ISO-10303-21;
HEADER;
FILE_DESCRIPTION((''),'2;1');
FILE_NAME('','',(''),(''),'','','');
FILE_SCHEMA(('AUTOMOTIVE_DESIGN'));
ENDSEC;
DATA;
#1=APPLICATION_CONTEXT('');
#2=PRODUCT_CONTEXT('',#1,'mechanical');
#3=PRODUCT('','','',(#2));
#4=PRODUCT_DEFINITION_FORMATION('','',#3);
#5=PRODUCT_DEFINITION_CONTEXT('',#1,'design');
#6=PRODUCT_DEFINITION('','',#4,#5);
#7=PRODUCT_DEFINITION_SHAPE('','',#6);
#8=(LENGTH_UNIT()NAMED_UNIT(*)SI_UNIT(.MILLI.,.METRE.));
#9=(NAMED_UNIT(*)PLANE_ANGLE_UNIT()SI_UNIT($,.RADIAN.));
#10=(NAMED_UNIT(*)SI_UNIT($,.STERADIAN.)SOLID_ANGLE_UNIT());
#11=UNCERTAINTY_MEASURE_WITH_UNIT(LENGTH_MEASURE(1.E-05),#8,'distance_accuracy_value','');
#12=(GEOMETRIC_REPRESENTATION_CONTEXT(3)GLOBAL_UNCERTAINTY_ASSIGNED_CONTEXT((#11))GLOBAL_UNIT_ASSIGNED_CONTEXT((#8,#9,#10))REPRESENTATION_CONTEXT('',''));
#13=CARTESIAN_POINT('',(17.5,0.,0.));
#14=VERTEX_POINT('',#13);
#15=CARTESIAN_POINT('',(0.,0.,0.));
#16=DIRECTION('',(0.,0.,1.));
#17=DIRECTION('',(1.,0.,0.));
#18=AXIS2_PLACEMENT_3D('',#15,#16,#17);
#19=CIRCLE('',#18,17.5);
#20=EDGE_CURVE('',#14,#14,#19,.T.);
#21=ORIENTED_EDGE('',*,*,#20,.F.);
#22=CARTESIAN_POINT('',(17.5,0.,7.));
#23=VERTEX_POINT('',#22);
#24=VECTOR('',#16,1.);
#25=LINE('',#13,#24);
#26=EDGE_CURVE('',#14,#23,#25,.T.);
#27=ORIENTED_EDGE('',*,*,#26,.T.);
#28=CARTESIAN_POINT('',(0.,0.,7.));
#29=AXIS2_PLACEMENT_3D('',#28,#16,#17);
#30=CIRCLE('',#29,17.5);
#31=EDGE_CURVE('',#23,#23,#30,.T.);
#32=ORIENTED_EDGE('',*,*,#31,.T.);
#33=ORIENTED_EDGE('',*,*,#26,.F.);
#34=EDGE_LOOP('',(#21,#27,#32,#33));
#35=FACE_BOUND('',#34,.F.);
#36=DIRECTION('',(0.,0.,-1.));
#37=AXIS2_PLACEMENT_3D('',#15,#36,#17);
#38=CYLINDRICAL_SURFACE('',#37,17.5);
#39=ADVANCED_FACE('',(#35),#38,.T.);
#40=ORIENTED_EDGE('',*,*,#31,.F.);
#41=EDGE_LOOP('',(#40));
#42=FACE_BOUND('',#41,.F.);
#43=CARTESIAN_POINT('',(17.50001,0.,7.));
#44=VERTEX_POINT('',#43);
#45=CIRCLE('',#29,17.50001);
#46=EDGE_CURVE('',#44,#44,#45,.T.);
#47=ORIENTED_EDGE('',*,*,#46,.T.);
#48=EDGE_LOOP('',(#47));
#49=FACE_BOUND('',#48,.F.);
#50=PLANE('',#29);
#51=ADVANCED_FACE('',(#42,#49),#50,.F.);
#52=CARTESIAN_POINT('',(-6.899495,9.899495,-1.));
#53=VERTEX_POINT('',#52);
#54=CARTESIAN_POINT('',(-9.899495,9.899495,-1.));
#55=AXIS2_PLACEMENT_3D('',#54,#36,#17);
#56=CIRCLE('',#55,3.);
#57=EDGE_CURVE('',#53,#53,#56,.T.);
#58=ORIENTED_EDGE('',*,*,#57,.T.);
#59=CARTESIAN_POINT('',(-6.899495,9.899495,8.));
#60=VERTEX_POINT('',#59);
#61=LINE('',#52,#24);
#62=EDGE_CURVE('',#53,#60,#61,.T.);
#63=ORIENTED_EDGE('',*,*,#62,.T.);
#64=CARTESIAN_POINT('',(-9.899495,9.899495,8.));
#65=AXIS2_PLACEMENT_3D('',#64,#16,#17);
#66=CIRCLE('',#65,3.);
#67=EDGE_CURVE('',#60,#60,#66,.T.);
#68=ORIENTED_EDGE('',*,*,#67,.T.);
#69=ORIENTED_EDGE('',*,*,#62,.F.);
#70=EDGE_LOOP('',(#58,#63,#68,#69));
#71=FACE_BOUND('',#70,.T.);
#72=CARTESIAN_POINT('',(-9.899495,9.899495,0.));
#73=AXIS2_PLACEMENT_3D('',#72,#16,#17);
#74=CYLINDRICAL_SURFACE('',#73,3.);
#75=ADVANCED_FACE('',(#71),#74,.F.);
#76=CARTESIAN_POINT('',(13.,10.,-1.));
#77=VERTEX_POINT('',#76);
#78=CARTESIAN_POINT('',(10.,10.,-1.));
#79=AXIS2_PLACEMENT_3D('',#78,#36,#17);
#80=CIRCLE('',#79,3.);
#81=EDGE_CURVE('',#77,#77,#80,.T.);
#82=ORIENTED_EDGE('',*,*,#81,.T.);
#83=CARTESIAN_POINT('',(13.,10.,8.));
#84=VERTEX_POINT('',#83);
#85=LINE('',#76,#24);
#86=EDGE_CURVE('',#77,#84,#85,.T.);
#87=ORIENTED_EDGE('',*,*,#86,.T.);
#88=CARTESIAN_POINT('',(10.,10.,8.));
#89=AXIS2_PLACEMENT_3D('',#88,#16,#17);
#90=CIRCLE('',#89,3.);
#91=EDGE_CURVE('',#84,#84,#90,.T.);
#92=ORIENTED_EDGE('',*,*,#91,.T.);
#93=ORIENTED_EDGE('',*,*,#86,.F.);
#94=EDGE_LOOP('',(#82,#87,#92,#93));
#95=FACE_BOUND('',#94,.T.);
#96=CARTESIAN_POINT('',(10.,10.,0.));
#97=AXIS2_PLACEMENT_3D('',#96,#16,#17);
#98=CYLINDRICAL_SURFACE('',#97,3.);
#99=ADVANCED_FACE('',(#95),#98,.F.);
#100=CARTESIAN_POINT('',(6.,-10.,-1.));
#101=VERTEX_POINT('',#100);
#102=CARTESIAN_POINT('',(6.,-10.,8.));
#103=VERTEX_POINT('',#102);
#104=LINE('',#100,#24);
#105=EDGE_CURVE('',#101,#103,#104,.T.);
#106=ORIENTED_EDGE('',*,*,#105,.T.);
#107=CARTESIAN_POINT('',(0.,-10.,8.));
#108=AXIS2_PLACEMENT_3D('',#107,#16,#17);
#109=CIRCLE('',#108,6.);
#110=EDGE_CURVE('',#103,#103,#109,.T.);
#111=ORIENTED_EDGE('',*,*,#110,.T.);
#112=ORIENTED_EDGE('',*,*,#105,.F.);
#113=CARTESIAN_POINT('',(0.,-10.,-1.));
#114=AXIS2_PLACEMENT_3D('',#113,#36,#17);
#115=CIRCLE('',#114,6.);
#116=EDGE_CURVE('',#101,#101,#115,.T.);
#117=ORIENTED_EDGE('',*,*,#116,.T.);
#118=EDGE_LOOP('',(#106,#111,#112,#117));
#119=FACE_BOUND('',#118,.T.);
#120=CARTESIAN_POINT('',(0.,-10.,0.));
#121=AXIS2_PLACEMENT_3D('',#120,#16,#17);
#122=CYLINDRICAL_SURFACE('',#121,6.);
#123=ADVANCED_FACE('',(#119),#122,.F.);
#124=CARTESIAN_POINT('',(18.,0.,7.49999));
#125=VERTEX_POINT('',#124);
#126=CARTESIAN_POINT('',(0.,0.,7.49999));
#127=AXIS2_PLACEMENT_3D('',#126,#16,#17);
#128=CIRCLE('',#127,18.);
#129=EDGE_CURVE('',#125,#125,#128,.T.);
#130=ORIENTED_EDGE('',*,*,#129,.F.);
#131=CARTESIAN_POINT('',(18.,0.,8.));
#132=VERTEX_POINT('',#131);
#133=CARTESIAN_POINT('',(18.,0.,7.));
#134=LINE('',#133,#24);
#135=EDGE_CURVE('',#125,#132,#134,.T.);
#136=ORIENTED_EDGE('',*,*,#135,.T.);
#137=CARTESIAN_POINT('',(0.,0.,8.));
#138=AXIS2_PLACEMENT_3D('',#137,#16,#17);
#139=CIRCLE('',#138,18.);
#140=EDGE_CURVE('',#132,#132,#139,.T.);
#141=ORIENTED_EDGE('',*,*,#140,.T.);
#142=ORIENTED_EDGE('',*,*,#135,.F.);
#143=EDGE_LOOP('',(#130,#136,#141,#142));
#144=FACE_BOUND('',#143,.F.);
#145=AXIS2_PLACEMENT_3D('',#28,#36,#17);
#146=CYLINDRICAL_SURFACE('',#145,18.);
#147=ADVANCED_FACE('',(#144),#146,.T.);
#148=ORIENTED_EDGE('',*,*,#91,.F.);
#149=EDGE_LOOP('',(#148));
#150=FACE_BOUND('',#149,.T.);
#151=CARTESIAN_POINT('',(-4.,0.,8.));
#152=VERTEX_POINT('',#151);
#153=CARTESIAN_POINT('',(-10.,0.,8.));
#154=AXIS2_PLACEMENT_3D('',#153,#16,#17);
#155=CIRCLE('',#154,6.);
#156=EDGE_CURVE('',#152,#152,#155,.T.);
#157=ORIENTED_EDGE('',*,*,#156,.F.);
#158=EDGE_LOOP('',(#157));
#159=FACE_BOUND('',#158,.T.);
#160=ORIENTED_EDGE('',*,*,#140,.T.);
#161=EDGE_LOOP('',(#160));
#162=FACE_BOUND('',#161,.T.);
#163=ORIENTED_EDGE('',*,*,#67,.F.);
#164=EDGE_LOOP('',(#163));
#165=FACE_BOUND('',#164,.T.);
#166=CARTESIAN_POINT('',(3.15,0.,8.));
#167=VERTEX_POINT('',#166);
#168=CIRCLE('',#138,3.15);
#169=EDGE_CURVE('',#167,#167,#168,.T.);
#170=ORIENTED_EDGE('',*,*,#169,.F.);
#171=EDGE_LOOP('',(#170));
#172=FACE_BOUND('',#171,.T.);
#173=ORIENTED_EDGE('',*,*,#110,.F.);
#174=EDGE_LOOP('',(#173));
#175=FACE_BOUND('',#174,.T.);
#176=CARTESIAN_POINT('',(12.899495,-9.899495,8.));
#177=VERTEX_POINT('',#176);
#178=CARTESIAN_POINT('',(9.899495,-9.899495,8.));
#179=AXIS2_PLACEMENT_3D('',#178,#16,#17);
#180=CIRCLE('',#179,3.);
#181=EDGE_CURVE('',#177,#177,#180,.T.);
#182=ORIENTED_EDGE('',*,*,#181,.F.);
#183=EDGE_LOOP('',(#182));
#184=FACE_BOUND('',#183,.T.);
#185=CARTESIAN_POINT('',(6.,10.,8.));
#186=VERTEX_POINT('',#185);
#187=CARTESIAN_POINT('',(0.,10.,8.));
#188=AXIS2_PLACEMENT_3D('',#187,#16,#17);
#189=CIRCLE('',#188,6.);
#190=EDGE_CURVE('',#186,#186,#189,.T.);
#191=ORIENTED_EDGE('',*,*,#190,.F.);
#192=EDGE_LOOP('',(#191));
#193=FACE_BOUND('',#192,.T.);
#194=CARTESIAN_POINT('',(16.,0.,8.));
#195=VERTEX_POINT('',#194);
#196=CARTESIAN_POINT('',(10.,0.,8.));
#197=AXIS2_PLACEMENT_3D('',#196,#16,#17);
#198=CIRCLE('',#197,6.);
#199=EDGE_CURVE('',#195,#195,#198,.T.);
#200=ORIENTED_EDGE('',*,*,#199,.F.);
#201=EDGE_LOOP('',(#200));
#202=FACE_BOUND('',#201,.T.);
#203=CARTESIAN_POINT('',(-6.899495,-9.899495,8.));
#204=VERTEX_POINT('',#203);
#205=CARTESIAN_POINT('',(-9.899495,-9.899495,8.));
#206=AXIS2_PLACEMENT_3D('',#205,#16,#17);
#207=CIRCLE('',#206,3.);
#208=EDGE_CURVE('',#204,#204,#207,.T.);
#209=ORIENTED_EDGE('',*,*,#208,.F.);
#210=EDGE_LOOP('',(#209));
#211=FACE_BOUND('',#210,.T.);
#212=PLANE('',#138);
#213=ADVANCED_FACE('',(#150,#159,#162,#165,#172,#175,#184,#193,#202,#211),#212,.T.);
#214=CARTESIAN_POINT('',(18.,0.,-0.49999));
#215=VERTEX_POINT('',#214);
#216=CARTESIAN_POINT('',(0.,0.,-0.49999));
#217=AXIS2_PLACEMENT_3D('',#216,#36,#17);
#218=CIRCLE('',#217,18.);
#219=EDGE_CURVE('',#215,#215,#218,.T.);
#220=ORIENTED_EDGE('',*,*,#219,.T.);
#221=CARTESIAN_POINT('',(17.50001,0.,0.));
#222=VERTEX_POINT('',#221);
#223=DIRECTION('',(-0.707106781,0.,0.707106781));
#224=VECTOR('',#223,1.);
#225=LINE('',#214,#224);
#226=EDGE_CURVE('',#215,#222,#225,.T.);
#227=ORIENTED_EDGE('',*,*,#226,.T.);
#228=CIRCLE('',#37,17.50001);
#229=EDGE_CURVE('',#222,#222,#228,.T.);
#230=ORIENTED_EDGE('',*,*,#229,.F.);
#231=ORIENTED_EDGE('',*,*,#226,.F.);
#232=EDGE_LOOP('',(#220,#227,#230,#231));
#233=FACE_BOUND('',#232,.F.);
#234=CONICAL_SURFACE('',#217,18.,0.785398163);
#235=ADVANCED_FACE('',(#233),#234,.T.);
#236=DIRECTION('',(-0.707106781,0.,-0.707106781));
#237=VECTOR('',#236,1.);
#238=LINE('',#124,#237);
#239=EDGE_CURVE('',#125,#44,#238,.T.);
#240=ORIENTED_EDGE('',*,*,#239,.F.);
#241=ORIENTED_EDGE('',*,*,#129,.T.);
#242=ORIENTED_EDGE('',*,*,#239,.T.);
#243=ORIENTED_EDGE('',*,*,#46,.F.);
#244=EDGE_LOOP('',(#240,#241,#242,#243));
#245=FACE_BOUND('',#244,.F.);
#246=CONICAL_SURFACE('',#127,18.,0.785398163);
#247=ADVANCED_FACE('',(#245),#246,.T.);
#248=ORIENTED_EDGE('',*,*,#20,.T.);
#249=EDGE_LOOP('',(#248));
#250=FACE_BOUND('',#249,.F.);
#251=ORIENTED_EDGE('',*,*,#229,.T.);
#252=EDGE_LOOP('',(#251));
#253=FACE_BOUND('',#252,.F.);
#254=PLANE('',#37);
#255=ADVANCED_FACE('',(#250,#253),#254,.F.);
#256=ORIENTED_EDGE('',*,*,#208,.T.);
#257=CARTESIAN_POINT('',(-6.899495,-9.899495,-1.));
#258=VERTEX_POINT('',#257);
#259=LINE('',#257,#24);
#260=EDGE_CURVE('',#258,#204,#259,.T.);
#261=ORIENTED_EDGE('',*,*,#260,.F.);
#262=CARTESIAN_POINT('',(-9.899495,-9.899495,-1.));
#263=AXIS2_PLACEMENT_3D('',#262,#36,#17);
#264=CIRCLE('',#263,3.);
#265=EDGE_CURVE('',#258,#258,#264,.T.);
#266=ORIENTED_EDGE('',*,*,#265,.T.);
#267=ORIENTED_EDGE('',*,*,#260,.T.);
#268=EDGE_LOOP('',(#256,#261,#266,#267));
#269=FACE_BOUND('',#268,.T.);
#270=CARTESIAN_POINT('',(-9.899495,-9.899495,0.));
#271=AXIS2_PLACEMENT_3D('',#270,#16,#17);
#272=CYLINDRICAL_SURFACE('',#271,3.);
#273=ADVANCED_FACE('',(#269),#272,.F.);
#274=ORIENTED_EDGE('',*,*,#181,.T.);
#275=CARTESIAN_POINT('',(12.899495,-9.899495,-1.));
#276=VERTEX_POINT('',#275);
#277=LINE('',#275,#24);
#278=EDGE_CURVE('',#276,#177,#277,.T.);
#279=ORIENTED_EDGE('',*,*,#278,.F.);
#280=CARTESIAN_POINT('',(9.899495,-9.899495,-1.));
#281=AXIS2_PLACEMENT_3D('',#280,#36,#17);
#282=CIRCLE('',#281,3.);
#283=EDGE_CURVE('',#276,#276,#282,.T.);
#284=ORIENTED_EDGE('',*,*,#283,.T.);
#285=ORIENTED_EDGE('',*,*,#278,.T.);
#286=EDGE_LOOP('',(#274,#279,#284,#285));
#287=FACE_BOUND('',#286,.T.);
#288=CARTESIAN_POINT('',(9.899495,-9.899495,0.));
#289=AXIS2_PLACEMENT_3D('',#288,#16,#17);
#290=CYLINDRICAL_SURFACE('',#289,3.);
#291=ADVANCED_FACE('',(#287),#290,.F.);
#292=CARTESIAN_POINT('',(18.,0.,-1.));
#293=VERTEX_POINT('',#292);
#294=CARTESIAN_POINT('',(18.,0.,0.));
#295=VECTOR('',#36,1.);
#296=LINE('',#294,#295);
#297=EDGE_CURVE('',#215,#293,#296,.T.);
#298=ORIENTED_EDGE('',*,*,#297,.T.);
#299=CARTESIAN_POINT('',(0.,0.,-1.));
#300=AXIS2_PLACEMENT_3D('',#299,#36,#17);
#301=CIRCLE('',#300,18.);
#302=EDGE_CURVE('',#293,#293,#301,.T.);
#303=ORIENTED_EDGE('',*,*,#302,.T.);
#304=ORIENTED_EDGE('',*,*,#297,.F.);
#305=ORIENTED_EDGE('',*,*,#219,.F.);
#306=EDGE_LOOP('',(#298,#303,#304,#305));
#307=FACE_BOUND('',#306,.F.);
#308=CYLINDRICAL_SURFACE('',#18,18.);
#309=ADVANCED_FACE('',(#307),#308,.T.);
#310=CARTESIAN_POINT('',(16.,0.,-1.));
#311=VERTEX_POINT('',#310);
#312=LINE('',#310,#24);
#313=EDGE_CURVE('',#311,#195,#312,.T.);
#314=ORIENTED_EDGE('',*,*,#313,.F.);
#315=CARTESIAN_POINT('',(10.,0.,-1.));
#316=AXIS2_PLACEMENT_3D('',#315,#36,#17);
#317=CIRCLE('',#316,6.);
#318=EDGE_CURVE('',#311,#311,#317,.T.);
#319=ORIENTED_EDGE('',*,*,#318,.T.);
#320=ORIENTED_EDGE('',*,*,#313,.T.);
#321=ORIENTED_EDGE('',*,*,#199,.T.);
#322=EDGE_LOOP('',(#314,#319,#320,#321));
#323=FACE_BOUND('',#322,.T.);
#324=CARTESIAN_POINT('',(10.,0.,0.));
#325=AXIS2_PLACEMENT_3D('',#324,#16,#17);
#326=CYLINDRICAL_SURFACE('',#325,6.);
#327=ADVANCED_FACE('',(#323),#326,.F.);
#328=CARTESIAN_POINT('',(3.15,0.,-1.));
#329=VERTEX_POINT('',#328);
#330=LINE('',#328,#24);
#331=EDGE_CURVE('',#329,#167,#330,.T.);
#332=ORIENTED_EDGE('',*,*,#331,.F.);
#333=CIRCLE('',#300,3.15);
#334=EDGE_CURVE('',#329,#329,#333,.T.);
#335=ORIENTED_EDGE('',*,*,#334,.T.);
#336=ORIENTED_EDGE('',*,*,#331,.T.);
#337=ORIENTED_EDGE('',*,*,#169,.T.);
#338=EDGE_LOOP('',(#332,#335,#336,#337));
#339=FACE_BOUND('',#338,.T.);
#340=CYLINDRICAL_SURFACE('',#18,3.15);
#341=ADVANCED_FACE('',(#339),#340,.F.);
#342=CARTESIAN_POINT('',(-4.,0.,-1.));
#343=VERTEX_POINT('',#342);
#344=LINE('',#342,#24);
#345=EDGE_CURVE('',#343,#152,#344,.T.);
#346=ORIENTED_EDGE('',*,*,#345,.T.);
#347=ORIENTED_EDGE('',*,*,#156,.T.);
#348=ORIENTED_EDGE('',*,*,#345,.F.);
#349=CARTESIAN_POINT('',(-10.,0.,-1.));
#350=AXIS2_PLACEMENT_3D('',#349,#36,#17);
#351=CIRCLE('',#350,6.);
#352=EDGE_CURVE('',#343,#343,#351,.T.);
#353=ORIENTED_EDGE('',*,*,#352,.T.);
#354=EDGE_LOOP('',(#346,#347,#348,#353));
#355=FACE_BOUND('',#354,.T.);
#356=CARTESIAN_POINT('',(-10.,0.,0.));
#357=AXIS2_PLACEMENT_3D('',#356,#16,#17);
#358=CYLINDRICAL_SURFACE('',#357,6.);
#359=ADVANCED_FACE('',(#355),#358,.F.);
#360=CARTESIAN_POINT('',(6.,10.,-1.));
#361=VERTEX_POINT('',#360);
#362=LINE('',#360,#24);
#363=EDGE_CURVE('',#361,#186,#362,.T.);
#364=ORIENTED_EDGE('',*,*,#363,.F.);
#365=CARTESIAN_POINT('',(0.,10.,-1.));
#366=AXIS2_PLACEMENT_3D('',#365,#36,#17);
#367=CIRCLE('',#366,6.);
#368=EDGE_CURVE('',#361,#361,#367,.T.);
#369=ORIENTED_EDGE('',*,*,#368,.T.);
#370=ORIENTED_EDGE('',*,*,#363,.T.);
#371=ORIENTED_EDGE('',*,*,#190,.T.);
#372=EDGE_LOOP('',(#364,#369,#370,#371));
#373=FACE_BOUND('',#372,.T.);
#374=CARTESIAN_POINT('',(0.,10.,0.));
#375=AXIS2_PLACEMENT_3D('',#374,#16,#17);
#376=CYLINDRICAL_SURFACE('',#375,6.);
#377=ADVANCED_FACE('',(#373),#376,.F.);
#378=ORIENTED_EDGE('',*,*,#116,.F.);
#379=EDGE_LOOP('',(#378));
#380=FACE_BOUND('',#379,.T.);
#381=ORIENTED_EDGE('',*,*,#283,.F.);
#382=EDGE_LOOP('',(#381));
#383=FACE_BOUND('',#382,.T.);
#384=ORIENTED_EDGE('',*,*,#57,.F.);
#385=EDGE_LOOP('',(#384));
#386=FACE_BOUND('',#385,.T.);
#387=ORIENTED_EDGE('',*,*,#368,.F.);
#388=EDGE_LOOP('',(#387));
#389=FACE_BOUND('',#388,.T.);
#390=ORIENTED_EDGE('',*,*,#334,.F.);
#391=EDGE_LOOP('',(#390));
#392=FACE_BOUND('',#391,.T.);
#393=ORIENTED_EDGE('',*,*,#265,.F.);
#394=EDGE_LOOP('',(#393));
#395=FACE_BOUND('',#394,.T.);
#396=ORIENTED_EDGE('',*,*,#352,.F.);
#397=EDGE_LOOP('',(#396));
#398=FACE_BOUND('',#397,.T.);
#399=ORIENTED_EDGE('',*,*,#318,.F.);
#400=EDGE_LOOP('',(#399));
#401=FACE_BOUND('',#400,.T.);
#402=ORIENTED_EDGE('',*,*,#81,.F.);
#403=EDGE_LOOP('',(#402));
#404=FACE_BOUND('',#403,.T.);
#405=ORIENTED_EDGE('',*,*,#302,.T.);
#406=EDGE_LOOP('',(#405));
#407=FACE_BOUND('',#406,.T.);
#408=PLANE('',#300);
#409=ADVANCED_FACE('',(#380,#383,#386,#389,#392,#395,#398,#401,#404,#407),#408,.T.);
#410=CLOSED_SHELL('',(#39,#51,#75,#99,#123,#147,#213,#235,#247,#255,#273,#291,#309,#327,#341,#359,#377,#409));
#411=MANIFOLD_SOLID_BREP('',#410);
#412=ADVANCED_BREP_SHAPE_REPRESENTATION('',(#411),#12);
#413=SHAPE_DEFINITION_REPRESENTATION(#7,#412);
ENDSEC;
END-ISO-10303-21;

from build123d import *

# Parameters (mm, degrees)
F0_R     = 17.5
F0_R_2   = 3
F0_R_3   = 6
F0_R_4   = 3.15
F1_DEPTH = 7
F2_R     = 18
F2_R_2   = 17.5
F2_R_3   = 3
F2_R_4   = 6
F2_R_5   = 3.15
F3_DEPTH = 1
F4_R     = 18
F4_R_2   = 17.5
F4_R_3   = 3
F4_R_4   = 6
F4_R_5   = 3.15
F5_DEPTH = 1
F6_SIZE  = 0.49999


# Not quite as in the source:
# - a fillet or chamfer is up to 0.001 mm smaller than in the source, because OpenCascade refuses the exact size


with BuildPart() as f1:
    # F0 (on Top) → F1 (new body)
    with BuildSketch(Plane.XY):
        Circle(F0_R)
        with Locations((-9.8994949366, -9.8994949366)):
            Circle(F0_R_2, mode=Mode.SUBTRACT)
        with Locations((0, -10)):
            Circle(F0_R_3, mode=Mode.SUBTRACT)
        with Locations((9.8994949366, -9.8994949366)):
            Circle(F0_R_2, mode=Mode.SUBTRACT)
        with Locations((-10, 0)):
            Circle(F0_R_3, mode=Mode.SUBTRACT)
        with Locations((-9.8994949366, 9.8994949366)):
            Circle(F0_R_2, mode=Mode.SUBTRACT)
        Circle(F0_R_4, mode=Mode.SUBTRACT)
        with Locations((10, 0)):
            Circle(F0_R_3, mode=Mode.SUBTRACT)
        with Locations((0, 10)):
            Circle(F0_R_3, mode=Mode.SUBTRACT)
        with Locations((10, 10)):
            Circle(F0_R_2, mode=Mode.SUBTRACT)
    extrude(amount=F1_DEPTH)

    # F2 (on face) → F3 (join)
    with BuildSketch(Plane.XY.offset(7)):
        Circle(F2_R)
        Circle(F2_R_2, mode=Mode.SUBTRACT)
        Circle(F2_R_2)
        with Locations((-9.8994949366, -9.8994949366)):
            Circle(F2_R_3, mode=Mode.SUBTRACT)
        with Locations((0, -10)):
            Circle(F2_R_4, mode=Mode.SUBTRACT)
        with Locations((9.8994949366, -9.8994949366)):
            Circle(F2_R_3, mode=Mode.SUBTRACT)
        with Locations((-10, 0)):
            Circle(F2_R_4, mode=Mode.SUBTRACT)
        with Locations((-9.8994949366, 9.8994949366)):
            Circle(F2_R_3, mode=Mode.SUBTRACT)
        Circle(F2_R_5, mode=Mode.SUBTRACT)
        with Locations((10, 0)):
            Circle(F2_R_4, mode=Mode.SUBTRACT)
        with Locations((0, 10)):
            Circle(F2_R_4, mode=Mode.SUBTRACT)
        with Locations((10, 10)):
            Circle(F2_R_3, mode=Mode.SUBTRACT)
    extrude(amount=F3_DEPTH)

    # F4 (on face) → F5 (join)
    with BuildSketch(Plane(origin=(0, 0, 0), x_dir=(1, 0, 0), z_dir=(0, 0, -1))):
        Circle(F4_R)
        Circle(F4_R_2, mode=Mode.SUBTRACT)
        Circle(F4_R_2)
        with Locations((-9.8994949366, -9.8994949366)):
            Circle(F4_R_3, mode=Mode.SUBTRACT)
        with Locations((0, -10)):
            Circle(F4_R_4, mode=Mode.SUBTRACT)
        with Locations((10, -10)):
            Circle(F4_R_3, mode=Mode.SUBTRACT)
        with Locations((-10, 0)):
            Circle(F4_R_4, mode=Mode.SUBTRACT)
        with Locations((-9.8994949366, 9.8994949366)):
            Circle(F4_R_3, mode=Mode.SUBTRACT)
        Circle(F4_R_5, mode=Mode.SUBTRACT)
        with Locations((10, 0)):
            Circle(F4_R_4, mode=Mode.SUBTRACT)
        with Locations((0, 10)):
            Circle(F4_R_4, mode=Mode.SUBTRACT)
        with Locations((9.8994949366, 9.8994949366)):
            Circle(F4_R_3, mode=Mode.SUBTRACT)
    extrude(amount=F5_DEPTH)

    # F6 (size 0.5 in the source; OpenCascade refuses exactly that, so slightly less here)
    f6_edges = [f1.edges().sort_by_distance(p)[0] for p in [
        (-18, 0, 0),
        (-18, 0, 7),
    ]]
    chamfer(f6_edges, length=F6_SIZE)


solid = f1.part
